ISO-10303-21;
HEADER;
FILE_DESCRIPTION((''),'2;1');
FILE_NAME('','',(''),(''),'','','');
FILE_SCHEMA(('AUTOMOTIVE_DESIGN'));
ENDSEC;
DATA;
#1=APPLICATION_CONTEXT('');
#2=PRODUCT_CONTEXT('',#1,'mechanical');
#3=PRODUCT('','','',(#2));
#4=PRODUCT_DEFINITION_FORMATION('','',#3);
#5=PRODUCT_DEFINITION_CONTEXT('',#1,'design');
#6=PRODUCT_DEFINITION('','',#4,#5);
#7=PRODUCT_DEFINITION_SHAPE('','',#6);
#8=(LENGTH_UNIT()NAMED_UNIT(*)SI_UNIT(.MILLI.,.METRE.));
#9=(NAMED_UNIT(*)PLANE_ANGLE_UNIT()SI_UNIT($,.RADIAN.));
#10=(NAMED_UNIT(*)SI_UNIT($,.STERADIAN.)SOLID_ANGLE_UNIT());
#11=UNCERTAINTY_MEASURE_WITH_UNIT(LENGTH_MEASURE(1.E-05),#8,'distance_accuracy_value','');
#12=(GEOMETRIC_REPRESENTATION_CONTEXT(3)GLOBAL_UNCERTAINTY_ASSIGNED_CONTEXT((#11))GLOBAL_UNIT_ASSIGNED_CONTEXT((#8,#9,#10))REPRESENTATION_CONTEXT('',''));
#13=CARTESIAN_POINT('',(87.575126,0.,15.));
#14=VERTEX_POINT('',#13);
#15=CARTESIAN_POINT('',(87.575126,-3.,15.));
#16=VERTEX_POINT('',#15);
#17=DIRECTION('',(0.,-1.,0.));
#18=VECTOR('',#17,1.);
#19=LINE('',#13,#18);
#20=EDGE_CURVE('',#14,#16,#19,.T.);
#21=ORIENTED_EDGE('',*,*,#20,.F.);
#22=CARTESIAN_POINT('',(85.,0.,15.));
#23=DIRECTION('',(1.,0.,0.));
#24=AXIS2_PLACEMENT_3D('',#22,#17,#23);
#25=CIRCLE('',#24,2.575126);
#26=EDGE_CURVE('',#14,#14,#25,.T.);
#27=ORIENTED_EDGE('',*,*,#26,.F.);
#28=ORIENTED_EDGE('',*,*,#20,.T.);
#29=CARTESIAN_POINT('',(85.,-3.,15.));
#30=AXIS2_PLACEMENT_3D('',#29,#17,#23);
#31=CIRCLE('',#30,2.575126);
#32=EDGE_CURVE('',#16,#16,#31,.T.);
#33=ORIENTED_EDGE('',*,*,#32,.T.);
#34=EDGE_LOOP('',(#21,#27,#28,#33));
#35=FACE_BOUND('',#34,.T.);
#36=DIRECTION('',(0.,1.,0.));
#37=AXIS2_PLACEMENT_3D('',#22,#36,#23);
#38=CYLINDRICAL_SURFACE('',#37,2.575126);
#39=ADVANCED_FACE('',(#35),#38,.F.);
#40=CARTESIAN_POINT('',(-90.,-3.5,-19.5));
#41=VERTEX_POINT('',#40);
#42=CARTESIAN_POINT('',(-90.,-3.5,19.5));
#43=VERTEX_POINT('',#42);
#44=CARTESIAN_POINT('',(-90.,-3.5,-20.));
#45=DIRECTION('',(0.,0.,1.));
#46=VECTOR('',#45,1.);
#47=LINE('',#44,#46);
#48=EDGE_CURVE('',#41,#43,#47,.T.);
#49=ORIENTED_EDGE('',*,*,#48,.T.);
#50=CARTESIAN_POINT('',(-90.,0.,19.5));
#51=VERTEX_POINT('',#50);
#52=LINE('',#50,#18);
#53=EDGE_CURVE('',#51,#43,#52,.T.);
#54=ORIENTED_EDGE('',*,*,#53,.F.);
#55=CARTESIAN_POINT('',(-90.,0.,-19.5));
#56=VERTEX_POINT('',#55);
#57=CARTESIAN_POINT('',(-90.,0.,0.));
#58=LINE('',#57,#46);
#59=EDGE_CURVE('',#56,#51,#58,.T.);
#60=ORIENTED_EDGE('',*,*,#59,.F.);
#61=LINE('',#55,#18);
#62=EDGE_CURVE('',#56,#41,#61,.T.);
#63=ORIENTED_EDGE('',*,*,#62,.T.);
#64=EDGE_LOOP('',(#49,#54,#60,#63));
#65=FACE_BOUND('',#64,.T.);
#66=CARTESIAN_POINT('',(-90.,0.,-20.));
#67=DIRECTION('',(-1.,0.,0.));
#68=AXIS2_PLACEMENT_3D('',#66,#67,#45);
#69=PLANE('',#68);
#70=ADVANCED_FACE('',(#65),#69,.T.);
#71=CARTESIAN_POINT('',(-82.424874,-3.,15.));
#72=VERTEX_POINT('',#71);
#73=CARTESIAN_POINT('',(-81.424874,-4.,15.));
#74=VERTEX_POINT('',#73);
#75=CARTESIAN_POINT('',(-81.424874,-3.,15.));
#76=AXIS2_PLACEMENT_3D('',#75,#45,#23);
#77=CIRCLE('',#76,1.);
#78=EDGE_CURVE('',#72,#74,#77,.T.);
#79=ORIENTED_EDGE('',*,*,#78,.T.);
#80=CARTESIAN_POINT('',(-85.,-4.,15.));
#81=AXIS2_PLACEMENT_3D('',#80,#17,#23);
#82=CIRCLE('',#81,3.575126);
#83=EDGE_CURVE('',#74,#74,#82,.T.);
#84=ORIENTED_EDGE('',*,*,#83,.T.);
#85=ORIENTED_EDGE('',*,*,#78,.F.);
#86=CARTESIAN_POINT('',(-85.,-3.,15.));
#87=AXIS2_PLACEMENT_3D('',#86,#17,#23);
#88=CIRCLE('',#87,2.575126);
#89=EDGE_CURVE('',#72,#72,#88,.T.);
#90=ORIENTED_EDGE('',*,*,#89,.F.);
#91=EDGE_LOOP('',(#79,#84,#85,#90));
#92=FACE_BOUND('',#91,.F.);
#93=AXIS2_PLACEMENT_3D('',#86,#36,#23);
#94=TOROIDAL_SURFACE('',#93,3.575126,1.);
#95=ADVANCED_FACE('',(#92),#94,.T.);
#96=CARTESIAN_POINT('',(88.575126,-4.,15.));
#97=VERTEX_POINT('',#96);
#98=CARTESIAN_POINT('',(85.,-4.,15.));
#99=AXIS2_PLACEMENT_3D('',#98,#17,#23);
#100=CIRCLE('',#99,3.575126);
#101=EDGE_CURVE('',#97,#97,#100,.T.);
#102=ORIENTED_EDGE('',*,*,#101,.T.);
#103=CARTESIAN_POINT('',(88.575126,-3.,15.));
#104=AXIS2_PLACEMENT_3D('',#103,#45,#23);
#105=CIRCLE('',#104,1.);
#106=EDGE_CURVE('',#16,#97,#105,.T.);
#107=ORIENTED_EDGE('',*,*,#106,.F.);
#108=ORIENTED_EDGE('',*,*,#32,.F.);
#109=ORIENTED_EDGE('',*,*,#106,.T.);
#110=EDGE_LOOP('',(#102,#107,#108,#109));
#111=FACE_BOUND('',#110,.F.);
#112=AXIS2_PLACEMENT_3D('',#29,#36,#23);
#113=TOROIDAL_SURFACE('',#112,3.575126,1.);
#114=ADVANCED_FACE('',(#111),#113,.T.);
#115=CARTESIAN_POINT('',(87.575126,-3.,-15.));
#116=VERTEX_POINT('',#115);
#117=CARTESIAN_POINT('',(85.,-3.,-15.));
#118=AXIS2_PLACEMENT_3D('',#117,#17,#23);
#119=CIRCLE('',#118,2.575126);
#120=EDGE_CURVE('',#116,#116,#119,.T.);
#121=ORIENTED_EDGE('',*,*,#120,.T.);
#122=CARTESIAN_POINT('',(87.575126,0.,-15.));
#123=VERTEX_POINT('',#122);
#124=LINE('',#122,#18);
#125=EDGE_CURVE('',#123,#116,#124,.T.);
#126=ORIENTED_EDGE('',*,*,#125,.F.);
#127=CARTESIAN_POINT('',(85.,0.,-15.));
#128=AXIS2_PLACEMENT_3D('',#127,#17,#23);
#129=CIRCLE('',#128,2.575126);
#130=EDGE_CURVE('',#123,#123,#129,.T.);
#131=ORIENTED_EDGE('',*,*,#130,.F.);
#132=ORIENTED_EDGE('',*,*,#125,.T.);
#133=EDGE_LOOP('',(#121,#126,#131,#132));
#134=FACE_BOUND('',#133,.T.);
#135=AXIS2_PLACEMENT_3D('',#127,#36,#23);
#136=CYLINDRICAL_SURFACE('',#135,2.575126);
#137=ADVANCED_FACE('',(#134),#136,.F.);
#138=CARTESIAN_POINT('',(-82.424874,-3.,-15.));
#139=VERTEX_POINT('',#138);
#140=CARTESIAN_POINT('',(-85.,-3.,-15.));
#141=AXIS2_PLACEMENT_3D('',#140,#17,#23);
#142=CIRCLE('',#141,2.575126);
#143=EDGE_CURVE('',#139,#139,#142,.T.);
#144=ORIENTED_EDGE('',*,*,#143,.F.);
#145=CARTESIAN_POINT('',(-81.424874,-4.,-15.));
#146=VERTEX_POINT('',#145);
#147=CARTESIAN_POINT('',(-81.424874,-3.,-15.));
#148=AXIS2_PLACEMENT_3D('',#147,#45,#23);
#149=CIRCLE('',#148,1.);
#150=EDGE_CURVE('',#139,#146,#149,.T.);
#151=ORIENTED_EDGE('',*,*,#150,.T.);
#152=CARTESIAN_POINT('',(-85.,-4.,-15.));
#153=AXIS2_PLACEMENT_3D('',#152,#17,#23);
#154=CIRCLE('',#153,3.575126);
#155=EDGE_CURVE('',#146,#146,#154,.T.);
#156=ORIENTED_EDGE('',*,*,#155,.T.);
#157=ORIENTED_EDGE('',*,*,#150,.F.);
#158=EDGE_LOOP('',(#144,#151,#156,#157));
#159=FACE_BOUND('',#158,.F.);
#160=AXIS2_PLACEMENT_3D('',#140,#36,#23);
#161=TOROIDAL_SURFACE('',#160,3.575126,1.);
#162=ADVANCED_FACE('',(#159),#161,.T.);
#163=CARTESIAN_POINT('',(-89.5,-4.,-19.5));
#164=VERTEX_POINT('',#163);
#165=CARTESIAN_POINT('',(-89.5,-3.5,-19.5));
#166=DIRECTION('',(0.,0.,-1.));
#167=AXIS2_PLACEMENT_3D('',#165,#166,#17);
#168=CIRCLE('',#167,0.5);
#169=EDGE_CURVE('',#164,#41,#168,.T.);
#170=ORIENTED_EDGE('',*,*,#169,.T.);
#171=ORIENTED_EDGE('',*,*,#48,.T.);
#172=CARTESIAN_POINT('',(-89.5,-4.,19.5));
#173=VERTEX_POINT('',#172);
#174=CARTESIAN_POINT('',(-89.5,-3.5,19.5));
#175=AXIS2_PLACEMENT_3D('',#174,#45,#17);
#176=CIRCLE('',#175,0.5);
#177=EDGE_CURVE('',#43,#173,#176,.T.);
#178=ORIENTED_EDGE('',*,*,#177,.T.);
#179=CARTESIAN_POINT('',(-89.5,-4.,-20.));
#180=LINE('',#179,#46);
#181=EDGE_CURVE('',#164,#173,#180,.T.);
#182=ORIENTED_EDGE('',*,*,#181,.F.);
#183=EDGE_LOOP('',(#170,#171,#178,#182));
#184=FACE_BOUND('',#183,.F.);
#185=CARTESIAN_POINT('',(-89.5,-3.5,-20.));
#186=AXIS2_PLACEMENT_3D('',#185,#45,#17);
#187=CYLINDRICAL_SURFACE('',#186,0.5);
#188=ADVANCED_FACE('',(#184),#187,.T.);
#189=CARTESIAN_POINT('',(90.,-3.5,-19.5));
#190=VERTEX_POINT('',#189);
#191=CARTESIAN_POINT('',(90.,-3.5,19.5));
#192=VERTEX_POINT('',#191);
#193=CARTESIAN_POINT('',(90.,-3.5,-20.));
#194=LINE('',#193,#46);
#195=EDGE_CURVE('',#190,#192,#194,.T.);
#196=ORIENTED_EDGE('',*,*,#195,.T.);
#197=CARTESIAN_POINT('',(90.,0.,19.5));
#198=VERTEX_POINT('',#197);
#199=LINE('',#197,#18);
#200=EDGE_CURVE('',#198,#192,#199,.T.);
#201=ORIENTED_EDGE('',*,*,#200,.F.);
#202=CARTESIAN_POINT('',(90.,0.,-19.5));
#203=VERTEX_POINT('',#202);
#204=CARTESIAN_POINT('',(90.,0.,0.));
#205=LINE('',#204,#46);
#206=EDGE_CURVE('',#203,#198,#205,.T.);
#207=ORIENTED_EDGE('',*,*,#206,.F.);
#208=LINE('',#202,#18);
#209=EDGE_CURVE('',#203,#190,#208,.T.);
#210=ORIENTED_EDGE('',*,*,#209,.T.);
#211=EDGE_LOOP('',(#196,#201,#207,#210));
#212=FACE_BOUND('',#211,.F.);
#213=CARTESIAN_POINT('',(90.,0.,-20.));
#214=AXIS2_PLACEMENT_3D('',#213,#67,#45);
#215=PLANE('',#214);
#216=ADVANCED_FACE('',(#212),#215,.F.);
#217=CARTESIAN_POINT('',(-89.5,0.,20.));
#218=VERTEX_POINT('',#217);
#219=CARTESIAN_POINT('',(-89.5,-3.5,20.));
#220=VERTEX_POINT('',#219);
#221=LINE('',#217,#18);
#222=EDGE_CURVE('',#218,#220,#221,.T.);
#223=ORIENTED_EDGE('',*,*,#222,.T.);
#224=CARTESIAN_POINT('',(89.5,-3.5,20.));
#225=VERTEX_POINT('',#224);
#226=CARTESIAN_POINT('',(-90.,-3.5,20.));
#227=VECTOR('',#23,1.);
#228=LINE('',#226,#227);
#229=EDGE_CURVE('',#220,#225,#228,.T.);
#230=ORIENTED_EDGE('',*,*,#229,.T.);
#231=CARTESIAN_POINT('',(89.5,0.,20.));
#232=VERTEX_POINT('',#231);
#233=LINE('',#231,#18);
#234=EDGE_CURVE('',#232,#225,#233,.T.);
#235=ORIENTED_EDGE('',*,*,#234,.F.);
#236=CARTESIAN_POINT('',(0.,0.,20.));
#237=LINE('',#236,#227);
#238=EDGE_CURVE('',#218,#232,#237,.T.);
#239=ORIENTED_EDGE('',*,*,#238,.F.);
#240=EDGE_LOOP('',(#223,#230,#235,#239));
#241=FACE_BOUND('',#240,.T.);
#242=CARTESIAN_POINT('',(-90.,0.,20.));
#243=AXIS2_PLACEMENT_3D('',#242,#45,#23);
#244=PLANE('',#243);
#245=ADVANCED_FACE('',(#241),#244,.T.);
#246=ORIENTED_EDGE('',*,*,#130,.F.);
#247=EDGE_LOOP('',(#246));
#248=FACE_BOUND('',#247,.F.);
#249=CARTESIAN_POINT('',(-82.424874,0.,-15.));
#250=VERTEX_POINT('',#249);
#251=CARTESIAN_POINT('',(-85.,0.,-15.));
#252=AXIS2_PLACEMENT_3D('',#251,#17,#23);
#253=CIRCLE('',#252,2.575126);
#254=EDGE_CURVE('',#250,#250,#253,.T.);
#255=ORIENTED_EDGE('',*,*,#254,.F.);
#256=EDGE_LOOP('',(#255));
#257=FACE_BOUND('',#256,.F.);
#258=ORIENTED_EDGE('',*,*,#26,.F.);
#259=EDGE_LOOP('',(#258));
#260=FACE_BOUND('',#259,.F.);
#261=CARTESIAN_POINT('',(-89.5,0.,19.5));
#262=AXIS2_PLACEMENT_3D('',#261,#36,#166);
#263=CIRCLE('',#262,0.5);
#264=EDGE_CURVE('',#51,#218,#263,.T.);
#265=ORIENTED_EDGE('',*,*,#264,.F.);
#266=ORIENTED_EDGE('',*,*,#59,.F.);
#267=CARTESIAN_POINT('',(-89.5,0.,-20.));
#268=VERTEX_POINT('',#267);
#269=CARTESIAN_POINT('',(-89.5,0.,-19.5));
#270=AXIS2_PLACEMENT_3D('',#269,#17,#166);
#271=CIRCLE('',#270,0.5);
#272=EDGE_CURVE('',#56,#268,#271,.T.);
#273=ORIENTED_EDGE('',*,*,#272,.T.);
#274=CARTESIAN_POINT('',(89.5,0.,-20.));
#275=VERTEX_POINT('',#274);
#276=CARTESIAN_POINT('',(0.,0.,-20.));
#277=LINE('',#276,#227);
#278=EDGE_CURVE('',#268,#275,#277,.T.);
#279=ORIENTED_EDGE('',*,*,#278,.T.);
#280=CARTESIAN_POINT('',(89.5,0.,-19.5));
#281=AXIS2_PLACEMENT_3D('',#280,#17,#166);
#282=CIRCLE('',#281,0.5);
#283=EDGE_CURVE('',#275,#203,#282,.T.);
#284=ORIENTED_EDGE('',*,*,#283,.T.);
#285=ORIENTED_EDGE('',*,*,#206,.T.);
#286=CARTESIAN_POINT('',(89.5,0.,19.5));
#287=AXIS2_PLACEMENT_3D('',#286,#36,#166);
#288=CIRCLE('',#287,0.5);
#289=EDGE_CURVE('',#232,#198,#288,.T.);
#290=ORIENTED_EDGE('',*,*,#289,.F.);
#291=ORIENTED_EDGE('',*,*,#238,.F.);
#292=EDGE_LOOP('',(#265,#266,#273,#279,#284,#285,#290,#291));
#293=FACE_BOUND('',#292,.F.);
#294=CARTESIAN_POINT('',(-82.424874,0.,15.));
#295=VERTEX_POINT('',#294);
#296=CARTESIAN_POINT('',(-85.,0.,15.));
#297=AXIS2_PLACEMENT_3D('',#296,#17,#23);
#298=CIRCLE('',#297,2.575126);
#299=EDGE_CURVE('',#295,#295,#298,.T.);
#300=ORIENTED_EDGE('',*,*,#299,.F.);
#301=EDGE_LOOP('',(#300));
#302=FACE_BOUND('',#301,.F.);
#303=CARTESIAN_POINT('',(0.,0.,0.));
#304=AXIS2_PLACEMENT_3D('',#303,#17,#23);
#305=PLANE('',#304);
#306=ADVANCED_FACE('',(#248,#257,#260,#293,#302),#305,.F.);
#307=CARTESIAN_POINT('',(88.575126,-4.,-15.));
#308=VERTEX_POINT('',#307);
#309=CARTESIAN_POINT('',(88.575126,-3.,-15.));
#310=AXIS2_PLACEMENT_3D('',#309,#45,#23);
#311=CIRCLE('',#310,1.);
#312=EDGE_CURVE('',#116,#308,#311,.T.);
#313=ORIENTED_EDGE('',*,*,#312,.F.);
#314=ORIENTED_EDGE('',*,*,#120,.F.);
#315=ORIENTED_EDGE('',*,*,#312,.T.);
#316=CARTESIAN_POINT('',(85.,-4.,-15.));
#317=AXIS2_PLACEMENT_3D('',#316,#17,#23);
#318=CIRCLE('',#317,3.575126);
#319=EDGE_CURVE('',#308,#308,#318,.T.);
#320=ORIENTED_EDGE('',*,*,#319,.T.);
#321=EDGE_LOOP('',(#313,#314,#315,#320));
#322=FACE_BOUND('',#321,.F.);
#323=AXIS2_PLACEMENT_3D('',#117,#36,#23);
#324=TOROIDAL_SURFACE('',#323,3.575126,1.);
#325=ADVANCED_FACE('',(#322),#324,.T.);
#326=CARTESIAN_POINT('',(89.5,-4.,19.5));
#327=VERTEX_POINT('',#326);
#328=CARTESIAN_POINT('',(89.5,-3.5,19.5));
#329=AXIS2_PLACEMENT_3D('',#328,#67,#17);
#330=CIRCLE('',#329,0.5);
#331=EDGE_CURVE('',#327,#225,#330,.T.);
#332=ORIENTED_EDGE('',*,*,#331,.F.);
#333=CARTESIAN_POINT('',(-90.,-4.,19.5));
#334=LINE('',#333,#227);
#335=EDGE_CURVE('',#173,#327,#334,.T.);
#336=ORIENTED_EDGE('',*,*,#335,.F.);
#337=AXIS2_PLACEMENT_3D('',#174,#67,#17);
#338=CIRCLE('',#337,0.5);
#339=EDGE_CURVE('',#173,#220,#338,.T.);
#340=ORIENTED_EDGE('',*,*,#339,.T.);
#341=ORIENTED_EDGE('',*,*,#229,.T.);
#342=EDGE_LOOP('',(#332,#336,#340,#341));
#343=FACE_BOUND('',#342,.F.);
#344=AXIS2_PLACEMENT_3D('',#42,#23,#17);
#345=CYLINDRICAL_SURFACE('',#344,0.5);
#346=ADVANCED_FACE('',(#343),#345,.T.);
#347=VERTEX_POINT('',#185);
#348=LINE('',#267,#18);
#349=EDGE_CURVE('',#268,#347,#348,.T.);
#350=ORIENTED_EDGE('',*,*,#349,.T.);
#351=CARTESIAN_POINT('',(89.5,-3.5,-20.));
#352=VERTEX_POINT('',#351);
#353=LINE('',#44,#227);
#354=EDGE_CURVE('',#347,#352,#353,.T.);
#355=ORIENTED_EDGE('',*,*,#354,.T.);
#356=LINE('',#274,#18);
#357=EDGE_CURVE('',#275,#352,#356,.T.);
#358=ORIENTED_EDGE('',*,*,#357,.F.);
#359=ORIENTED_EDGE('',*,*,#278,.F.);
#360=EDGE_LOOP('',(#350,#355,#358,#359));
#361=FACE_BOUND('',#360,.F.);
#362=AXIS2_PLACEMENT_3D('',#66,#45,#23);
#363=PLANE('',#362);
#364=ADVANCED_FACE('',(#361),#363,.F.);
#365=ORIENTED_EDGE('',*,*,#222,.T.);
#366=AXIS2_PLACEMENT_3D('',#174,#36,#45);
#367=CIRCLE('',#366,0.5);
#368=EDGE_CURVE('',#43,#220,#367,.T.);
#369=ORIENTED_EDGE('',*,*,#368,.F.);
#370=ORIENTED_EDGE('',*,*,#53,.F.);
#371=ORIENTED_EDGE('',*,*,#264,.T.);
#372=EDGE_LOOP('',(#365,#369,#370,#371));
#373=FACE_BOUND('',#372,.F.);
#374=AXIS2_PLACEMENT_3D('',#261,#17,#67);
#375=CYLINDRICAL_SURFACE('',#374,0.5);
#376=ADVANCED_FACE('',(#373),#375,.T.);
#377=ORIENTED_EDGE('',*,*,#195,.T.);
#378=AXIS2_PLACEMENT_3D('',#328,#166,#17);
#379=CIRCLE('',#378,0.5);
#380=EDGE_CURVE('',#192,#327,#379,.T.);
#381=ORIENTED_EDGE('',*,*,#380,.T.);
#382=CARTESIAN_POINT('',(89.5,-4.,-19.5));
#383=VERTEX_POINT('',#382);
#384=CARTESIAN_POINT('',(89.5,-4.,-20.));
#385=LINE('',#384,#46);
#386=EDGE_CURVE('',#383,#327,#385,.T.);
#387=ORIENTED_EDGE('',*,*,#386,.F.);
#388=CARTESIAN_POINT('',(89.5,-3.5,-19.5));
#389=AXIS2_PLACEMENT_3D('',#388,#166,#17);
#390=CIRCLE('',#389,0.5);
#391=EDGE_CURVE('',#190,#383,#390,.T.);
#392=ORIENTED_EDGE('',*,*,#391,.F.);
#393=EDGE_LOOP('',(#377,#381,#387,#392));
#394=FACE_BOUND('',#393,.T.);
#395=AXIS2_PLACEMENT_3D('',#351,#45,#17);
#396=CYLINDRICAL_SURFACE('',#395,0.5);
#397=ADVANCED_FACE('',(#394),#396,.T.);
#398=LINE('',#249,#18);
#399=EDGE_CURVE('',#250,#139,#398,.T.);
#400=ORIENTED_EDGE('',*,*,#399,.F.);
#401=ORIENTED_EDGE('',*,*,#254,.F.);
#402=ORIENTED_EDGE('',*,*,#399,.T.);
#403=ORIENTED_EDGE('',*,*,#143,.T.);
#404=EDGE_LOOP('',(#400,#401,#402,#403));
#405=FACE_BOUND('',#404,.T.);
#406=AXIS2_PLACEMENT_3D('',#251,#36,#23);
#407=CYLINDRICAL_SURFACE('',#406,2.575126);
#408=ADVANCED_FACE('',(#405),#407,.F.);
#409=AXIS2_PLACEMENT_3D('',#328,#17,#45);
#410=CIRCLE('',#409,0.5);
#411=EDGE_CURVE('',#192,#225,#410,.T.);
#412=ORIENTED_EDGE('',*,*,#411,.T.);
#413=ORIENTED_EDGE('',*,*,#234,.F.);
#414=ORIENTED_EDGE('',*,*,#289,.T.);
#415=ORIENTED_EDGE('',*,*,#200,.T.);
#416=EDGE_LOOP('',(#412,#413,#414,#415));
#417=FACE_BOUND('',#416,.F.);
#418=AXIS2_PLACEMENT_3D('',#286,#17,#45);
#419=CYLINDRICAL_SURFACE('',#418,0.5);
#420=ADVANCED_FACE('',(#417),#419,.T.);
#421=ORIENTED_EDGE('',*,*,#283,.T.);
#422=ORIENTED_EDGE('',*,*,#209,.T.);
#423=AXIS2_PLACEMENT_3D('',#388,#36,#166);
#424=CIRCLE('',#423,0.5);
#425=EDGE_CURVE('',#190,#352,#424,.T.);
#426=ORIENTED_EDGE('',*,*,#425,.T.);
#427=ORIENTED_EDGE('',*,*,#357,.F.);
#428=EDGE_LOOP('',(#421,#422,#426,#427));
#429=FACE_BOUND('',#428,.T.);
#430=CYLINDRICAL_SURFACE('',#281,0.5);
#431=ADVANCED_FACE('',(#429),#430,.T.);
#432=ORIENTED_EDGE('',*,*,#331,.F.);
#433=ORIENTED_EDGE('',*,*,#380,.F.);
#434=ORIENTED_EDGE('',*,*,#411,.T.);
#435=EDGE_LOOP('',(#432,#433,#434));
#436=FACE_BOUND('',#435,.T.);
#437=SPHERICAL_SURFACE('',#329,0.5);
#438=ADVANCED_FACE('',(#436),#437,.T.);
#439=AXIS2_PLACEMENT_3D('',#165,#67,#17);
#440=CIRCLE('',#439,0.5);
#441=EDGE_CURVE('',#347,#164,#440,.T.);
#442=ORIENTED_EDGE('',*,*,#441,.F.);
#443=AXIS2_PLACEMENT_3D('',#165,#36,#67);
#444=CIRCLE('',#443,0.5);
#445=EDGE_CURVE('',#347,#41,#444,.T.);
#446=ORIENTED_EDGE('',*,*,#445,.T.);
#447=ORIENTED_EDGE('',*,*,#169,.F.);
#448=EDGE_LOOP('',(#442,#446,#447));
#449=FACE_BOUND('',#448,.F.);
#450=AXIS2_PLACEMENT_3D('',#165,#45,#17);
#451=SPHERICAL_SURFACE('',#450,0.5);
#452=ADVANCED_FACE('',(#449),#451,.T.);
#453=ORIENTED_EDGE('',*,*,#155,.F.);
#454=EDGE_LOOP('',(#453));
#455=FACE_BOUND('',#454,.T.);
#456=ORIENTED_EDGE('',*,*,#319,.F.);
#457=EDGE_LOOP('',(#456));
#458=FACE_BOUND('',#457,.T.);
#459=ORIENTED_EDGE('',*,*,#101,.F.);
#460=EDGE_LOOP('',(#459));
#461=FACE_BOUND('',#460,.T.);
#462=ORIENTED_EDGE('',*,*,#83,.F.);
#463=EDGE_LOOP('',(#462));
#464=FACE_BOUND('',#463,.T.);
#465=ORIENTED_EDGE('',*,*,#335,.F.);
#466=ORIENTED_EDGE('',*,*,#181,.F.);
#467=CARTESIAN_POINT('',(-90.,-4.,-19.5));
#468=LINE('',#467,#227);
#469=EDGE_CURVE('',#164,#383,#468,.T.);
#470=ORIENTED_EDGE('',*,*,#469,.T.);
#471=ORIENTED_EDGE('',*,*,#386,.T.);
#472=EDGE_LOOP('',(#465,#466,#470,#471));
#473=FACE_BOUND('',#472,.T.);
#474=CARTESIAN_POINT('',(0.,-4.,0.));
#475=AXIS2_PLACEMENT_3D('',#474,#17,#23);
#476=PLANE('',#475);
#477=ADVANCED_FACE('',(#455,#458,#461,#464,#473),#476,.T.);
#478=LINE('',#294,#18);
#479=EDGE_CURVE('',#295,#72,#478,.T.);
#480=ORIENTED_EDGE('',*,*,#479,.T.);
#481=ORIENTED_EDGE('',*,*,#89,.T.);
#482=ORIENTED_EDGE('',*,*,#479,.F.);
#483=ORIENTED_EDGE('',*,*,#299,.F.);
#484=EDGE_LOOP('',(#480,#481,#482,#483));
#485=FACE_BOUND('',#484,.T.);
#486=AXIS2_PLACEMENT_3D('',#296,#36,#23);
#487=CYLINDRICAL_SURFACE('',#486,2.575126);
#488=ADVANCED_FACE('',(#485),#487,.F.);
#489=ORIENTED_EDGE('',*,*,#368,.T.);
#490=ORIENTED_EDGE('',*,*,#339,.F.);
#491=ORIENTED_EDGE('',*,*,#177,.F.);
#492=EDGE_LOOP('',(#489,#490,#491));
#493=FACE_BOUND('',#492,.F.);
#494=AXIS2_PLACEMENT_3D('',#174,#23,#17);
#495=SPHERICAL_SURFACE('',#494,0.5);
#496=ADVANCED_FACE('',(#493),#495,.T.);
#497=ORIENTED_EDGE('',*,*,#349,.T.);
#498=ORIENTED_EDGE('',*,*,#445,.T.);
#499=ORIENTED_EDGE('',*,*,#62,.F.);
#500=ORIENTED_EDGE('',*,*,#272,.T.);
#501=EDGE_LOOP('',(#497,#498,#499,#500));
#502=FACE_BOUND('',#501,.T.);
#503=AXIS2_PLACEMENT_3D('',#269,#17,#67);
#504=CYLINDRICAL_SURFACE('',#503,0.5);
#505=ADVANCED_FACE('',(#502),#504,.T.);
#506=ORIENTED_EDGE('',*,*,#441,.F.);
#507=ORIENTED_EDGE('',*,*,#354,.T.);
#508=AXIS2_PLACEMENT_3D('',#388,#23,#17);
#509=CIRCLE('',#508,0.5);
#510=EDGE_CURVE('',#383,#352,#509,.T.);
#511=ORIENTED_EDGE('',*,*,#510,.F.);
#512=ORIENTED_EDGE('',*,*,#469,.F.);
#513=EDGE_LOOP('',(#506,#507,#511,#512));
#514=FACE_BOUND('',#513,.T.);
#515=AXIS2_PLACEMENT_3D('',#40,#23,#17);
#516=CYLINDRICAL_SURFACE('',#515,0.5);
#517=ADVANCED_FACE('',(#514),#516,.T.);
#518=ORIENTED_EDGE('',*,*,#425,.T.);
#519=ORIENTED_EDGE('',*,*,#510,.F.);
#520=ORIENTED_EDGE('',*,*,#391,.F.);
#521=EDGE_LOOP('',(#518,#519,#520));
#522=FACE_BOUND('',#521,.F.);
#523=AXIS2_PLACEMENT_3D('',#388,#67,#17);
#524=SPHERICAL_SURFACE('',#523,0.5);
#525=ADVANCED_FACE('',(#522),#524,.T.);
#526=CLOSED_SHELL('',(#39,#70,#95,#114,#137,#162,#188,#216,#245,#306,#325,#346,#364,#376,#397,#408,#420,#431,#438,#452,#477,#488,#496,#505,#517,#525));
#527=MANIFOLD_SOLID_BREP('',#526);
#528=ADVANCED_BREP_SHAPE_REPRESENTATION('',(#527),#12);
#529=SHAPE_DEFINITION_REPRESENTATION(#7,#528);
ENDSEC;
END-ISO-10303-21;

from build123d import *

# Parameters (mm, degrees)
F0_W     = 180
F0_H     = 40
F0_R     = 2.5751263091
F1_DEPTH = 4
F2_R     = 1
F3_R     = 0.5


# Not quite as in the source:
# - a feature names something its author has since deleted; it is built from what else it names


with BuildPart() as f1:
    # F0 (on Front) → F1 (new body)
    with BuildSketch(Plane.XZ):
        Rectangle(F0_W, F0_H)
        with Locations((-85, -15)):
            Circle(F0_R, mode=Mode.SUBTRACT)
        with Locations((85, -15)):
            Circle(F0_R, mode=Mode.SUBTRACT)
        with Locations((-85, 15)):
            Circle(F0_R, mode=Mode.SUBTRACT)
        with Locations((85, 15)):
            Circle(F0_R, mode=Mode.SUBTRACT)
    extrude(amount=F1_DEPTH)

    # F2
    f2_edges = [f1.edges().sort_by_distance(p)[0] for p in [
        (-87.575126, -4, 15),
        (-87.575126, -4, -15),
        (82.424874, -4, 15),
        (82.424874, -4, -15),
    ]]
    fillet(f2_edges, radius=F2_R)

    # F3
    f3_edges = [f1.edges().sort_by_distance(p)[0] for p in [
        (0, -4, 20),
        (-90, -4, 0),
        (0, -4, -20),
        (90, -4, 0),
        (-90, -2, 20),
        (-90, -2, -20),
        (90, -2, 20),
        (90, -2, -20),
    ]]
    fillet(f3_edges, radius=F3_R)


solid = f1.part
